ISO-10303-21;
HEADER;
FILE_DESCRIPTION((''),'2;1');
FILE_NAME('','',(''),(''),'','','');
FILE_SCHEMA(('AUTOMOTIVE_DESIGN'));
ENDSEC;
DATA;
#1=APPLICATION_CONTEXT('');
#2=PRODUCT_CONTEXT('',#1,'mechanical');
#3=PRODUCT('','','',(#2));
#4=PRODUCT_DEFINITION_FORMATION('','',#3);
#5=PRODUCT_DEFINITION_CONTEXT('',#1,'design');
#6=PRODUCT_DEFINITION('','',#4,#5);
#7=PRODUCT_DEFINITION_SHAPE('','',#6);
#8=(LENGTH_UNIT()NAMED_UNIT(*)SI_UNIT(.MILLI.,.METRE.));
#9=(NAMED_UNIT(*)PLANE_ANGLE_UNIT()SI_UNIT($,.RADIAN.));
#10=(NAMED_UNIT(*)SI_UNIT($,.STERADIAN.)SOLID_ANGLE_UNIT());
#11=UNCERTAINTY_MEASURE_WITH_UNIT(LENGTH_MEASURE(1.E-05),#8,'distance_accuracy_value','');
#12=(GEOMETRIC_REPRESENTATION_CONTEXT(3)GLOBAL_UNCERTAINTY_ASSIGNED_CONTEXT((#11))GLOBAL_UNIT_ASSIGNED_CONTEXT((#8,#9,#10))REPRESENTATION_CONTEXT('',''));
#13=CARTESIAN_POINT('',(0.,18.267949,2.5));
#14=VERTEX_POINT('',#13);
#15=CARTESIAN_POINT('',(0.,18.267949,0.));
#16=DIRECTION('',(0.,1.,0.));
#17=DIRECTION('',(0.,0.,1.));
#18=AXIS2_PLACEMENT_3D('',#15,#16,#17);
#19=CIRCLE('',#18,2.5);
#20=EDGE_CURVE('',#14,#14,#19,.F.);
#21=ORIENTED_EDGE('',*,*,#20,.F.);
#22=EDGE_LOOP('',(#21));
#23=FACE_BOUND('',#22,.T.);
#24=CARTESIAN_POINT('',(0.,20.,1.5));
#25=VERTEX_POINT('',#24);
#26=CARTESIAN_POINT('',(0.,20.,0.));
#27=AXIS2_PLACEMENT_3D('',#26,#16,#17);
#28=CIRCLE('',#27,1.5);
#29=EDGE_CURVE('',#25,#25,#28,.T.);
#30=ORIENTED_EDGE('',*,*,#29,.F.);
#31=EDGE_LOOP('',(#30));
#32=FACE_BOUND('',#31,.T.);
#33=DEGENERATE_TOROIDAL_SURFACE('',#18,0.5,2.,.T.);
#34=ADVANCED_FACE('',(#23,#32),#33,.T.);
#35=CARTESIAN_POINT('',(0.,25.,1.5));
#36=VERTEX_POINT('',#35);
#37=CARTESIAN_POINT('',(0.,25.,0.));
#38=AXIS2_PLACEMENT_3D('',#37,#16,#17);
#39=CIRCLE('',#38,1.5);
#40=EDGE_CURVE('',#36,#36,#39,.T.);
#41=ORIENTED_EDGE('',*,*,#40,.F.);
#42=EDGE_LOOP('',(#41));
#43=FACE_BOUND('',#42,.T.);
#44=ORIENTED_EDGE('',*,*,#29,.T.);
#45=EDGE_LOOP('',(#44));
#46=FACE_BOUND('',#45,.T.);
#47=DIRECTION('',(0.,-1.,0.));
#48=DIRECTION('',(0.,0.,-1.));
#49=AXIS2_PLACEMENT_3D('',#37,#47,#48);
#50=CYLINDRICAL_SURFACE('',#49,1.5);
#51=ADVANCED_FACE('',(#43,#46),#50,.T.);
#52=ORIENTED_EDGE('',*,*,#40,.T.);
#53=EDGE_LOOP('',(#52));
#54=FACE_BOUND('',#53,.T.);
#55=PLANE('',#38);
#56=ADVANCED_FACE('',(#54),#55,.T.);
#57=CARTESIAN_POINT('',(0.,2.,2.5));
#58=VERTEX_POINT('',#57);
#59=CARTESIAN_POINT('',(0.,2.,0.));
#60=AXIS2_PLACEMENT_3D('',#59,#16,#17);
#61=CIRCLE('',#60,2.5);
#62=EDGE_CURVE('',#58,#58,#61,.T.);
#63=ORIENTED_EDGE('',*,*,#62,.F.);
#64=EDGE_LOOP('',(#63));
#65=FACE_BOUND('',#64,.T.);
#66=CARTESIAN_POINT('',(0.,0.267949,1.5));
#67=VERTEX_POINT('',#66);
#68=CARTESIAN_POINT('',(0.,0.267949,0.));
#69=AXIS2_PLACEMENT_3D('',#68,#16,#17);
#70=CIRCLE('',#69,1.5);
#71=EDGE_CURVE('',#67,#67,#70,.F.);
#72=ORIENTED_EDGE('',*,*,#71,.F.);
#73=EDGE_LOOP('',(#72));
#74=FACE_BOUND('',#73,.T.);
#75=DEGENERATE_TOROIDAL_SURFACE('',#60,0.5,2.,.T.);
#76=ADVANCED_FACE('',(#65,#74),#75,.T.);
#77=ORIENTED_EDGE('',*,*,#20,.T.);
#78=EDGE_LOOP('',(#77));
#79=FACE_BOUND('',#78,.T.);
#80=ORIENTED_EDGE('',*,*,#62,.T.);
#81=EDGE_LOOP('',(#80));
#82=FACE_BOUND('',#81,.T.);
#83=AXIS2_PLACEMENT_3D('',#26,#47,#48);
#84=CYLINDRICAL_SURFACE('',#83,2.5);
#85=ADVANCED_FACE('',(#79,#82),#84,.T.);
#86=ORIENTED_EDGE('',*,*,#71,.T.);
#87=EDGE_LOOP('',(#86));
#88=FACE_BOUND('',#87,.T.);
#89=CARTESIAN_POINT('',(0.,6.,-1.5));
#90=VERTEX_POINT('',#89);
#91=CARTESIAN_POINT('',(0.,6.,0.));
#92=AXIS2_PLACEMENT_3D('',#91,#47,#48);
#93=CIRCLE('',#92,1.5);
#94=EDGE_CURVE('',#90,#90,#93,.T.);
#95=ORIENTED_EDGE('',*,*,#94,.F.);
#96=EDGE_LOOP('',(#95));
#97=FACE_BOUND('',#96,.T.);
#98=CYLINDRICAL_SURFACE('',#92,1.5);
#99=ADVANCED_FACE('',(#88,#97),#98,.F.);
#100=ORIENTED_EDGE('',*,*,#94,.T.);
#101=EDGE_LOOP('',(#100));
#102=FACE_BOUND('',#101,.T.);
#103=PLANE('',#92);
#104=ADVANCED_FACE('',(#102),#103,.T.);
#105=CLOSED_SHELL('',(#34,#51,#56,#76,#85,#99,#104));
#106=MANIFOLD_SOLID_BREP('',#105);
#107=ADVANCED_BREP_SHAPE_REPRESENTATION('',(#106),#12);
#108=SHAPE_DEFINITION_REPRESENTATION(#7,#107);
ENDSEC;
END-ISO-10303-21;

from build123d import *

# Parameters (mm, degrees)
CROQUIS1_R              = 2.5
SALIENTE_EXTRUIR1_DEPTH = 20
REDONDEO1_R             = 2
CROQUIS2_R              = 1.5
CORTAR_EXTRUIR1_DEPTH   = 6
CROQUIS3_R              = 1.5
SALIENTE_EXTRUIR2_DEPTH = 5
REDONDEO2_R             = 2


with BuildPart() as part:
    # Croquis1 → Saliente-Extruir1 (new body)
    with BuildSketch(Plane(origin=(0, 0, 0), x_dir=(1, 0, 0), z_dir=(0, 1, 0))):
        with Locations(Location((0, 0, 0), (0, 0, 270))):
            Circle(CROQUIS1_R)
    extrude(amount=SALIENTE_EXTRUIR1_DEPTH)

    # Redondeo1
    redondeo1_edges = [part.edges().sort_by_distance(p)[0] for p in [
        (0, 0, -2.5),
    ]]
    fillet(redondeo1_edges, radius=REDONDEO1_R)

    # Croquis2 → Cortar-Extruir1 (cut)
    with BuildSketch(Plane.XZ):
        with Locations(Location((0, 0, 0), (0, 0, 270))):
            Circle(CROQUIS2_R)
    extrude(amount=-CORTAR_EXTRUIR1_DEPTH, mode=Mode.SUBTRACT)

    # Croquis3 → Saliente-Extruir2 (add)
    with BuildSketch(Plane(origin=(0, 20, 0), x_dir=(1, 0, 0), z_dir=(0, 1, 0))):
        with Locations(Location((0, 0, 0), (0, 0, 90))):
            Circle(CROQUIS3_R)
    extrude(amount=SALIENTE_EXTRUIR2_DEPTH)

    # Redondeo2
    # the kernel refuses this fillet: 2 mm, written as the material it takes off along each edge
    with BuildSketch(Plane(origin=(0, 20, 0), x_dir=(0, 0, 1), z_dir=(-1, 0, 0))) as redondeo2_piece_1:
        with BuildLine():
            CenterArc((0.5, -1.732050808), REDONDEO2_R, 0, 60)
            Line((1.5, 0), (1.52, 0.034641016))
            ThreePointArc((1.52, 0.034641016), (2, 0.04), (2.5, 0.04))
            Line((2.5, 0.04), (2.54, 0))
            Line((2.54, 0), (2.54, -1.732050808))
            Line((2.54, -1.732050808), (2.5, -1.732050808))
        make_face()
    revolve(axis=Axis((0, 20, 0), (0, 1, 0)), mode=Mode.SUBTRACT)


solid = part.part
